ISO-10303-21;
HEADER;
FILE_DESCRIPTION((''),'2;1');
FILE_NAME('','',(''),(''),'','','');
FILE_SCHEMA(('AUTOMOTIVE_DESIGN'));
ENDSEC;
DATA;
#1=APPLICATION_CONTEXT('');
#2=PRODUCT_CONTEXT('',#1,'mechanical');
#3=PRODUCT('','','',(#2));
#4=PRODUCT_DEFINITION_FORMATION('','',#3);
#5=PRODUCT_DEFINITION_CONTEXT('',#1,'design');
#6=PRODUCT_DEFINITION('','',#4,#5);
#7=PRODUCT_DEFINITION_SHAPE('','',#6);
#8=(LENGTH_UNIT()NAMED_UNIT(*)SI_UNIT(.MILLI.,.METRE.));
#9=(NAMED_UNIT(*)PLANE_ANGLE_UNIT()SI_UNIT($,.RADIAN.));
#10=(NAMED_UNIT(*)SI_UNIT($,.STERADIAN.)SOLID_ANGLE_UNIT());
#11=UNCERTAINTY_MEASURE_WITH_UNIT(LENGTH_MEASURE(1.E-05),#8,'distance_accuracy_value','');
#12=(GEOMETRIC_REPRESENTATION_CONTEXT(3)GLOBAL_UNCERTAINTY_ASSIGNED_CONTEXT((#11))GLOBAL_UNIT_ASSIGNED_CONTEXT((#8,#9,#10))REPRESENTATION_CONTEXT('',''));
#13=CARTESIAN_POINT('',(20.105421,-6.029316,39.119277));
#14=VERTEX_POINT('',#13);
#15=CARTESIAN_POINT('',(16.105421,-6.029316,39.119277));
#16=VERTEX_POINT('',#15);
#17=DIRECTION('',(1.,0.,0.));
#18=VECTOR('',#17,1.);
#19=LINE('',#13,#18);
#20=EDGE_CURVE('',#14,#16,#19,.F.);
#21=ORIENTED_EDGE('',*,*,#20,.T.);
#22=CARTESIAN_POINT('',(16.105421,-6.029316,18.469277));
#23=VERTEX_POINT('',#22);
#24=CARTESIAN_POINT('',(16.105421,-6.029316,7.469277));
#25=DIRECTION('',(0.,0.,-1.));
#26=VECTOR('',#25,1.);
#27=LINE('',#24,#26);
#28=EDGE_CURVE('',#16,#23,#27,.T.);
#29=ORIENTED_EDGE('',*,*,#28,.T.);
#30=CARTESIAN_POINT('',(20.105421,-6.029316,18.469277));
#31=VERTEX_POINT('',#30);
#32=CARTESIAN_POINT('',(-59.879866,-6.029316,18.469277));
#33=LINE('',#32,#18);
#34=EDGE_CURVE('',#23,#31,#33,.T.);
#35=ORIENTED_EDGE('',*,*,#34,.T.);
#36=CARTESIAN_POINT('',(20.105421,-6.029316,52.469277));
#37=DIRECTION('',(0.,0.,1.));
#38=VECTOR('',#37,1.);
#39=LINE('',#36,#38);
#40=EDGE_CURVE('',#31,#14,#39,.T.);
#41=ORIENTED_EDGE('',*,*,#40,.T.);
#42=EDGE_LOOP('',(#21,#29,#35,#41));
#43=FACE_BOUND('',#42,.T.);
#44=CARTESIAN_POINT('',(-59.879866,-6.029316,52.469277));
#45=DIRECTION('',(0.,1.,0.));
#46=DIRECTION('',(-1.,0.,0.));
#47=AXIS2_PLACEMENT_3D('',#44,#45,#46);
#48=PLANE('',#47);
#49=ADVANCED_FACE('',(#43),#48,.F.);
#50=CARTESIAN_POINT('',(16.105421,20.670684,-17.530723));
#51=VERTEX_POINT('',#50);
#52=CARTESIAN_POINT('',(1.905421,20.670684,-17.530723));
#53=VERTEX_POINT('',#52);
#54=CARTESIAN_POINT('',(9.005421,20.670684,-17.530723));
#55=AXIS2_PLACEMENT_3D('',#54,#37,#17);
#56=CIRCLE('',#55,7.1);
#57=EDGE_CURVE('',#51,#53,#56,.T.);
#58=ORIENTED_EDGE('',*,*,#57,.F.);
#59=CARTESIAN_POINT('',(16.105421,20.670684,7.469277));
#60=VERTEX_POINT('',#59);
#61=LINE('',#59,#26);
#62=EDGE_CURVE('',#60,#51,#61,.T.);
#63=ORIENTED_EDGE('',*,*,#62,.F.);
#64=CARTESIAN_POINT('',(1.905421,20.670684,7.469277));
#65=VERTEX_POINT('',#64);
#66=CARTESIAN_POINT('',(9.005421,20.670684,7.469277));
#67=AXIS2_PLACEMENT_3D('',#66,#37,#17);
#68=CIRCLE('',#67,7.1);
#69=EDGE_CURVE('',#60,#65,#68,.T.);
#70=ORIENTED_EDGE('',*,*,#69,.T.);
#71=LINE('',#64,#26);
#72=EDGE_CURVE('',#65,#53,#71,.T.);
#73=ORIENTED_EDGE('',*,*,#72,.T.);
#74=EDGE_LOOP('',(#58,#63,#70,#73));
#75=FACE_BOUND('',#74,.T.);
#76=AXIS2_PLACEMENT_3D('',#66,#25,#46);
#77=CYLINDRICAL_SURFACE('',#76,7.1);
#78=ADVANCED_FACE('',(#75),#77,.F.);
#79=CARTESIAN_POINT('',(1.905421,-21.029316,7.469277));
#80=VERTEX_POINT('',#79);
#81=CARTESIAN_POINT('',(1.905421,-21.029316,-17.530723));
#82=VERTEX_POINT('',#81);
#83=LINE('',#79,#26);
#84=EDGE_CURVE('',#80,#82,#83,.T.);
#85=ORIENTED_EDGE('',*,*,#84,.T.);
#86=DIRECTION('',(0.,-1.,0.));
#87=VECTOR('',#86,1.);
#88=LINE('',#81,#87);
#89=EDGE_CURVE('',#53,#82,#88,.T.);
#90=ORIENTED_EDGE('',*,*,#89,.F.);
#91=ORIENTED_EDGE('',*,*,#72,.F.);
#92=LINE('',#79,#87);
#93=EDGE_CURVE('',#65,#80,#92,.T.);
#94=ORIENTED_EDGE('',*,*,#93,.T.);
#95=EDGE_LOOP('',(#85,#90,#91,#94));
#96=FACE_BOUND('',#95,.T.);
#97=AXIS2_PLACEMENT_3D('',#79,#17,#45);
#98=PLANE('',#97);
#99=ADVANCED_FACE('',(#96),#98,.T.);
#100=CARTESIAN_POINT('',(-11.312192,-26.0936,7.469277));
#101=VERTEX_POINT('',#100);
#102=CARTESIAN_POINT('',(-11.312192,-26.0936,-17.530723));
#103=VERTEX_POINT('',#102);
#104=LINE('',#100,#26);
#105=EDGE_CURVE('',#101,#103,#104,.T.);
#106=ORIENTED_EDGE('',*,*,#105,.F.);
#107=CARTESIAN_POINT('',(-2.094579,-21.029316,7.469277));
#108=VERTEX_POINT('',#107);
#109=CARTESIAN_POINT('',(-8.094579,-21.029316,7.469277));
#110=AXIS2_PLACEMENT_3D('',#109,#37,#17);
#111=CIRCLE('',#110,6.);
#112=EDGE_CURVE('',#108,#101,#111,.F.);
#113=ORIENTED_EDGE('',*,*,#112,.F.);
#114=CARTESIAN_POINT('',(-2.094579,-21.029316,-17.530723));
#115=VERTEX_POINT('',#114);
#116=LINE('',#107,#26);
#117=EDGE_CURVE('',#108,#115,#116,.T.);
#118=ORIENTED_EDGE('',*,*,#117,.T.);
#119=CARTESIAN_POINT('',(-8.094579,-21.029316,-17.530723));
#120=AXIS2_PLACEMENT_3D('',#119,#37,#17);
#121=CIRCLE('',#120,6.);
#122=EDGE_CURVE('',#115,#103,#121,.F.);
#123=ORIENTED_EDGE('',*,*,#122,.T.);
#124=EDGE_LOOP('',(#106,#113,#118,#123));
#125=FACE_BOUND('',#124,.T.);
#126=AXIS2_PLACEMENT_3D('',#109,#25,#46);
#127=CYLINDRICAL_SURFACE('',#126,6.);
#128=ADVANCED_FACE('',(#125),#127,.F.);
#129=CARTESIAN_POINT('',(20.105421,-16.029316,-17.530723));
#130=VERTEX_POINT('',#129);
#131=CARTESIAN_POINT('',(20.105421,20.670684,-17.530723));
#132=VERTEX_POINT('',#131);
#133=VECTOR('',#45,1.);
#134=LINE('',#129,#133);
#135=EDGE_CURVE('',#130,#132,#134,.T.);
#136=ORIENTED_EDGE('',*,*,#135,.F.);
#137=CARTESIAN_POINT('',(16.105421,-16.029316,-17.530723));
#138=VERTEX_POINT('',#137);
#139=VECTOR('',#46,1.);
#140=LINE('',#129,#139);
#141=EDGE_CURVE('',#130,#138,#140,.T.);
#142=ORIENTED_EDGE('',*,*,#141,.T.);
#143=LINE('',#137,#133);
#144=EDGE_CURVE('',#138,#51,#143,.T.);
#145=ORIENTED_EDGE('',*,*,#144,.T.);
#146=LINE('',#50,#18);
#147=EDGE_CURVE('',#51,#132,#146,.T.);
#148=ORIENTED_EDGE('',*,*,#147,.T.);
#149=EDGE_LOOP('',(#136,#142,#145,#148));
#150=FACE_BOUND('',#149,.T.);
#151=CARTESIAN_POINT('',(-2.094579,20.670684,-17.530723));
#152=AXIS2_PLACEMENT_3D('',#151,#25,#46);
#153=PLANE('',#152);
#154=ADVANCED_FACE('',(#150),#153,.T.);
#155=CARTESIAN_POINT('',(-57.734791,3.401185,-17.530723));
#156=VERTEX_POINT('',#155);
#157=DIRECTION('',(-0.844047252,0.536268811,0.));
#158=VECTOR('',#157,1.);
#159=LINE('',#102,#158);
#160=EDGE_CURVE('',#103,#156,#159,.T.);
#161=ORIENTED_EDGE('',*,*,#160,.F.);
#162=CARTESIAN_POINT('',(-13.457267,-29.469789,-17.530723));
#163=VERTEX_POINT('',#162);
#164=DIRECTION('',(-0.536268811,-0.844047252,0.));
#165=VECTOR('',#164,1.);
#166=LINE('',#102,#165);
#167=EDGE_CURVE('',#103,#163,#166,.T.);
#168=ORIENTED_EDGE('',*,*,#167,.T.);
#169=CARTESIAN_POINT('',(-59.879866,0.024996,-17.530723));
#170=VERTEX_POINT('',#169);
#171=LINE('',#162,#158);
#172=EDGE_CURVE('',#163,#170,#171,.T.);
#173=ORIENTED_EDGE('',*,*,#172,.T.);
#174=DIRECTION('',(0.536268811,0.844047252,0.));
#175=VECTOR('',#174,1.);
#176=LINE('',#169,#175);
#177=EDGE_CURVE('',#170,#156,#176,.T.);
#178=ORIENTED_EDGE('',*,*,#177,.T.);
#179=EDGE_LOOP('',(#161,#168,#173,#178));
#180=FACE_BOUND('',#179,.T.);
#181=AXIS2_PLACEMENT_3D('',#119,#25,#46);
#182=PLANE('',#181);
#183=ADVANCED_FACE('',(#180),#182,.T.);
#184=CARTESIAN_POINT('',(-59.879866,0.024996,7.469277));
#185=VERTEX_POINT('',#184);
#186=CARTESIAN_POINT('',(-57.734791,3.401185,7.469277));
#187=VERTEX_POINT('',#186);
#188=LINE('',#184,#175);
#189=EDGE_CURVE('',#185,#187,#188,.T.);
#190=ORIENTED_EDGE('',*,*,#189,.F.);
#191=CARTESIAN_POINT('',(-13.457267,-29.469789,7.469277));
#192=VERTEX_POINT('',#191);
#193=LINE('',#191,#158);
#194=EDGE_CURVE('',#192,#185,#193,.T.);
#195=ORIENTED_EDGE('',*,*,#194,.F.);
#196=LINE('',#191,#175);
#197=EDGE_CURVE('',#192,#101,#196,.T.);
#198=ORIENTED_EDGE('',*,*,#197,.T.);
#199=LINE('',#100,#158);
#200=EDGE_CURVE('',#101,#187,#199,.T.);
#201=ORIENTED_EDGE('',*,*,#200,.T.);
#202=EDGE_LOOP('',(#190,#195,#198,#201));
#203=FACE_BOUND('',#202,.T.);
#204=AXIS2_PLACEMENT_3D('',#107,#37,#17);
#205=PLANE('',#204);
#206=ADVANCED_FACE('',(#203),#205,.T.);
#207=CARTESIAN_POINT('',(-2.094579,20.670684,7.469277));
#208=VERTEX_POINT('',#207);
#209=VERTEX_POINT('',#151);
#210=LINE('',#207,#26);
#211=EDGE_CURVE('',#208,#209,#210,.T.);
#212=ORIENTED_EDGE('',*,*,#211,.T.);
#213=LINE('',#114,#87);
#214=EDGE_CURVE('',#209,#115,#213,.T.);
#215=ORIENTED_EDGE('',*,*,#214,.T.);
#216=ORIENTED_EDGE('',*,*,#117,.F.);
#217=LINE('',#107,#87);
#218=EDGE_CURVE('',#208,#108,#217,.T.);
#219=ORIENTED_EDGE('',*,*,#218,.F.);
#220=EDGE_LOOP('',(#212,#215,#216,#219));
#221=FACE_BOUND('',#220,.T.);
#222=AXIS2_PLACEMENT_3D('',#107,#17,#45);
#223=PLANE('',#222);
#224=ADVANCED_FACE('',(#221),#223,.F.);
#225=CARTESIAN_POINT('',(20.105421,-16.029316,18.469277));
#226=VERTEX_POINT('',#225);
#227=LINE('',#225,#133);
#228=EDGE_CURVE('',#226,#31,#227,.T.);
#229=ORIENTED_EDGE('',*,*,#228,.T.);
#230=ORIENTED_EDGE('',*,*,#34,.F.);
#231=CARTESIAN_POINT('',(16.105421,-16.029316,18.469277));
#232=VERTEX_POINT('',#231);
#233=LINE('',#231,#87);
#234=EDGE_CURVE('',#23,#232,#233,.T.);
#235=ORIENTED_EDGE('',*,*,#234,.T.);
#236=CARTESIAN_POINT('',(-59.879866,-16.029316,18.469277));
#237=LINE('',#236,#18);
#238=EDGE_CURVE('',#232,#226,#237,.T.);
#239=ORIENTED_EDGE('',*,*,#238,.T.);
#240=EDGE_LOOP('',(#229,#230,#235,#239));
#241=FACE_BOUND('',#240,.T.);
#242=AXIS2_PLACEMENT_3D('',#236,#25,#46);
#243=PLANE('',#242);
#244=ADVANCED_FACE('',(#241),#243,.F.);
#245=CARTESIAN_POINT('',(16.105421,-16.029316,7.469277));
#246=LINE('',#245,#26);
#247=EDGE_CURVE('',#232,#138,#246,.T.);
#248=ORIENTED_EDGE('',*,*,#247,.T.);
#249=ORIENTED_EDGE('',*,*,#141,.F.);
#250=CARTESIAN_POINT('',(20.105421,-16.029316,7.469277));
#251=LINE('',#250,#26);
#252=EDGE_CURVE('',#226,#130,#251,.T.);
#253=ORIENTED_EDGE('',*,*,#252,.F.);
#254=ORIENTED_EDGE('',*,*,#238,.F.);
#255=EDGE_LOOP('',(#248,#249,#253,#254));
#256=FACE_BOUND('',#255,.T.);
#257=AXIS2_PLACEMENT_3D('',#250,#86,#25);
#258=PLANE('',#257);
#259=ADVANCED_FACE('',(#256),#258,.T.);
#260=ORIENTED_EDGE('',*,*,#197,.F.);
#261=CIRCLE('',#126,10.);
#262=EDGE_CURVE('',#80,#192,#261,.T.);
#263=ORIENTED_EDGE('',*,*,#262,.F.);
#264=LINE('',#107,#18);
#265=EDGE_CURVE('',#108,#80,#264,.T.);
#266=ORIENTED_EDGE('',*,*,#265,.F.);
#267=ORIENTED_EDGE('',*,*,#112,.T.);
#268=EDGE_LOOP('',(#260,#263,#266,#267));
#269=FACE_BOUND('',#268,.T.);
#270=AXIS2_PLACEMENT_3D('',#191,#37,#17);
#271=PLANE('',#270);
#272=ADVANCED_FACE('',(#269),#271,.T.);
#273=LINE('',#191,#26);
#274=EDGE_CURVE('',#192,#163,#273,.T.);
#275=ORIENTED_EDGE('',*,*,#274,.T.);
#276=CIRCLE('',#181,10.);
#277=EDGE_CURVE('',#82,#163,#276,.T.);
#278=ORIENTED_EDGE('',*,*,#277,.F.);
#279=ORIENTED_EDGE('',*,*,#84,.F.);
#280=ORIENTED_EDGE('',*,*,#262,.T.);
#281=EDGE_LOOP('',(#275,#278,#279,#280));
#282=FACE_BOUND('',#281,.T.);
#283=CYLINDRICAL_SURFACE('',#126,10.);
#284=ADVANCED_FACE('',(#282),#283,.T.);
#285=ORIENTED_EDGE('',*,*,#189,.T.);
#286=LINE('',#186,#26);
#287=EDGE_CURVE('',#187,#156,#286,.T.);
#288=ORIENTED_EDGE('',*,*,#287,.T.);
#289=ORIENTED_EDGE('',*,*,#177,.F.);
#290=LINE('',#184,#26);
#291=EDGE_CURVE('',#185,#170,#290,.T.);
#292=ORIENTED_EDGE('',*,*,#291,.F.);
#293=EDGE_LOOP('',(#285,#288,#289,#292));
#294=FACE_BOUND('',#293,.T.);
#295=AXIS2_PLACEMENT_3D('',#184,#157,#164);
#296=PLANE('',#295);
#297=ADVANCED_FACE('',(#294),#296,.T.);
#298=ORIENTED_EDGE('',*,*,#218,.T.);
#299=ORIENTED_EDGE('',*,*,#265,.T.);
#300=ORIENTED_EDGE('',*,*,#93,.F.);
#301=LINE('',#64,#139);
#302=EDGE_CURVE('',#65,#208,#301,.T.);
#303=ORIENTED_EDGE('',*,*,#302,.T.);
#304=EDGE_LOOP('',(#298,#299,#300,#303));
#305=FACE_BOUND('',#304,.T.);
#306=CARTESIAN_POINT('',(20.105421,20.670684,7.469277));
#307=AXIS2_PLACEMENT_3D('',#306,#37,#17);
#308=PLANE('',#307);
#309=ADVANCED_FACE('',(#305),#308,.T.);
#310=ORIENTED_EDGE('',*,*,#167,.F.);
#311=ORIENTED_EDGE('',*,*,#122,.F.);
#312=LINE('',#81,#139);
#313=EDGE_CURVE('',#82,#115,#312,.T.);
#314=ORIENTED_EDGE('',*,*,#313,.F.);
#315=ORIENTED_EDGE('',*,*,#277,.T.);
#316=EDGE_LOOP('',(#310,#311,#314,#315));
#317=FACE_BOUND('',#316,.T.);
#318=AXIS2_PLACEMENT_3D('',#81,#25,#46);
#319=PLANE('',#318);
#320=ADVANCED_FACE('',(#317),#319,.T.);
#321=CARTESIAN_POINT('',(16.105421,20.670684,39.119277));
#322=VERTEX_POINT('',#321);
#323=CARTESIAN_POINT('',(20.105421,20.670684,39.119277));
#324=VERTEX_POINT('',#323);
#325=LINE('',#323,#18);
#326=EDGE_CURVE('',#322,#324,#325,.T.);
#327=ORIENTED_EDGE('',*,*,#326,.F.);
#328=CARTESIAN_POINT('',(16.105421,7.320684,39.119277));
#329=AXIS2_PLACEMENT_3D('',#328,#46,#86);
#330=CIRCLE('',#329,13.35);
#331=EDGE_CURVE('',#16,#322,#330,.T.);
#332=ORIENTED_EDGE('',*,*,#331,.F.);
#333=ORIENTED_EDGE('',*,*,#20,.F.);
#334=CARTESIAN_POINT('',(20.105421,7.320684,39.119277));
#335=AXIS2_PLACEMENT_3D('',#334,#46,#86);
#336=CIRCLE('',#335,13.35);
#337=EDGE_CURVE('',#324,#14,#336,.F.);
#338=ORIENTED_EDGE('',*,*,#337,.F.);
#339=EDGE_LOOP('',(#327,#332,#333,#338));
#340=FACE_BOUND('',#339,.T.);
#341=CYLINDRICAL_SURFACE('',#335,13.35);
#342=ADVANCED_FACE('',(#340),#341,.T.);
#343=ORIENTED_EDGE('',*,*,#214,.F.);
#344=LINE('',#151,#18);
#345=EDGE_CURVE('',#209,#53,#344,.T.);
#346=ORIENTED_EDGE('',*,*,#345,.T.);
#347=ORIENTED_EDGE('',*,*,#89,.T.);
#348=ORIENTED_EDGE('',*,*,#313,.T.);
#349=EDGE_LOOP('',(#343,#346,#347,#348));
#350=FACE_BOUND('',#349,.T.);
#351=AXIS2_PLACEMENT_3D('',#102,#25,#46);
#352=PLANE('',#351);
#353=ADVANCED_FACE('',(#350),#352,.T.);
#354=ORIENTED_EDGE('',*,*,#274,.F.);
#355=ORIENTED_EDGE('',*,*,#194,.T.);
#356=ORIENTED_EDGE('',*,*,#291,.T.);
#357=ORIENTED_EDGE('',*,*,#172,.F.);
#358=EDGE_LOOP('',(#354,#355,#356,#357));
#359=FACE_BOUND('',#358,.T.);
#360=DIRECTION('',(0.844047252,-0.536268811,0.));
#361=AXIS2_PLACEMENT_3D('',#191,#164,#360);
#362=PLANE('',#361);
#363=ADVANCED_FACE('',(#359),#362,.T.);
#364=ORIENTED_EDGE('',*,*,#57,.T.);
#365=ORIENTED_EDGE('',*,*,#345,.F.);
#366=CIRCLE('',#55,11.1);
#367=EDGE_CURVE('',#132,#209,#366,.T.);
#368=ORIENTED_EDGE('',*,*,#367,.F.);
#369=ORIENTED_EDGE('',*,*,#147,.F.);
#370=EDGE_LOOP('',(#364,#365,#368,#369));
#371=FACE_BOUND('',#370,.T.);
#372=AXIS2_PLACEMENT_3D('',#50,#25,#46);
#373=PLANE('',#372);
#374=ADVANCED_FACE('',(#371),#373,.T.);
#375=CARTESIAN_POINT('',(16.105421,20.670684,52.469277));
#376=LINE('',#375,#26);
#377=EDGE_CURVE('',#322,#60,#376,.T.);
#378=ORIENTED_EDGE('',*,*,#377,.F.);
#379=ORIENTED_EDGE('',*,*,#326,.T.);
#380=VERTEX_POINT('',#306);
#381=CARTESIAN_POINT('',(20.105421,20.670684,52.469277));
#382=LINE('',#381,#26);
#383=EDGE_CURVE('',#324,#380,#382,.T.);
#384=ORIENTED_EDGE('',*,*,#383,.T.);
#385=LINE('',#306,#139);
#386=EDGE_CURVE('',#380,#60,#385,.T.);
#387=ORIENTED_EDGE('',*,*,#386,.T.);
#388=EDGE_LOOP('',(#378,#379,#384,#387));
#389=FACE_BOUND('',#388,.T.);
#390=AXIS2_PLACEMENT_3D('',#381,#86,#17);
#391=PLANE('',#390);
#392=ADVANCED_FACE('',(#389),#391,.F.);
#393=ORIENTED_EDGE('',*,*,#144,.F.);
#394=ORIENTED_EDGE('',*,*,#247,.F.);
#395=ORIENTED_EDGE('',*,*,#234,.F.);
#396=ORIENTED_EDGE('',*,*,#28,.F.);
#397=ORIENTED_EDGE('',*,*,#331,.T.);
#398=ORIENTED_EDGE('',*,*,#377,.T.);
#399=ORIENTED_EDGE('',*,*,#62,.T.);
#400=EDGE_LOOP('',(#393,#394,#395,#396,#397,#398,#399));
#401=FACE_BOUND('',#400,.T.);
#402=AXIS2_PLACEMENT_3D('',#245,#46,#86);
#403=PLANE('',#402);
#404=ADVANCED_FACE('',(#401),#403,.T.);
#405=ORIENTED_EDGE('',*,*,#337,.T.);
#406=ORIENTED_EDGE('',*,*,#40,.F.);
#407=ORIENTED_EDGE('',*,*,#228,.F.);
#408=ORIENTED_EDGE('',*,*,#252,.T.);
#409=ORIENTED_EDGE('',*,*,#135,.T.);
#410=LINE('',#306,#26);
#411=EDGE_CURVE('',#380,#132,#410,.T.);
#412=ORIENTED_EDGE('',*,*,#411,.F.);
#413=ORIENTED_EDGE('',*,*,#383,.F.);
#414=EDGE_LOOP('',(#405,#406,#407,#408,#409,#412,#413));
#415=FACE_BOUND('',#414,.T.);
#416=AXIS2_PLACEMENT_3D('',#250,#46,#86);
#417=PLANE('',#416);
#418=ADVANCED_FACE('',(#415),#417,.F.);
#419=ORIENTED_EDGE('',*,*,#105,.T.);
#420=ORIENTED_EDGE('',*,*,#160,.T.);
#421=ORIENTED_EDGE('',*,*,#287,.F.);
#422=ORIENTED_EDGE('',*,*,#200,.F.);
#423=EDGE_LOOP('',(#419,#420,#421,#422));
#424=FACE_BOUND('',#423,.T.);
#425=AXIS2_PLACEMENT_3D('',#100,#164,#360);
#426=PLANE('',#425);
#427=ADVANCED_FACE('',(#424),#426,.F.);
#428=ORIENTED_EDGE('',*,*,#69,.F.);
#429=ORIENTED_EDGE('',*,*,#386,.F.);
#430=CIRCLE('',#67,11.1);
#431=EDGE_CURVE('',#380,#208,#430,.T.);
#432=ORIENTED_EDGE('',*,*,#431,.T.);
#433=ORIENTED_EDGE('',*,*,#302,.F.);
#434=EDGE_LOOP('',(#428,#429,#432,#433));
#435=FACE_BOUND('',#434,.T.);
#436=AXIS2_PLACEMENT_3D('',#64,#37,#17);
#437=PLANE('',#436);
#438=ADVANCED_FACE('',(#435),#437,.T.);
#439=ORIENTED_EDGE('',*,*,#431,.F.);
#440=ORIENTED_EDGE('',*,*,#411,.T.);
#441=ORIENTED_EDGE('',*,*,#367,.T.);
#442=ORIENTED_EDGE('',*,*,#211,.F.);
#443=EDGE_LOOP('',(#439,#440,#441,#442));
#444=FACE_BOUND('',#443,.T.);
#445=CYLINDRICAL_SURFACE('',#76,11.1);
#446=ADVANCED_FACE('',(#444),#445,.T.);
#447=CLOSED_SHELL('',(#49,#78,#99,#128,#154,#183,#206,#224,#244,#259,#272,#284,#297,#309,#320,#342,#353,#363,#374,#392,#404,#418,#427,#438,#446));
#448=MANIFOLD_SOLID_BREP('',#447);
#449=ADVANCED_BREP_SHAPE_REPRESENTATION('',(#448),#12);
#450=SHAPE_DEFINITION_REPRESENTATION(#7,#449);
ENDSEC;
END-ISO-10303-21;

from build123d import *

# Parameters (mm, degrees)
BASE_FLANGE1_DEPTH  = 2.5
SKETCH6_W           = 0.4
SKETCH6_H           = 3.67
BOSS_EXTRUDE1_DEPTH = 4.5
SKETCH7_W           = 3.4
SKETCH7_H           = 1
CUT_EXTRUDE1_DEPTH  = 12.139958989
FILLET1_RADIUS      = 1.335
FILLET1_LENGTH      = 0.4
SCALE1_SCALE        = 10


# Sheet-metal steps are written as plain solids
with BuildPart() as part:
    # Sketch1 → Base-Flange1 (new body)
    with BuildSketch(Plane.XY):
        with BuildLine():
            Line((0.71, -1.835), (0.71, 1.835))
            ThreePointArc((0.71, 1.835), (0, 2.545), (-0.71, 1.835))
            Line((-0.71, 1.835), (-0.71, -2.335))
            ThreePointArc((-0.71, -2.335), (-1.228475759, -3.211432773), (-2.246268811, -3.179047252))
            Line((-2.246268811, -3.179047252), (-6.888528694, -0.229568793))
            Line((-6.888528694, -0.229568793), (-6.67402117, 0.108050107))
            Line((-6.67402117, 0.108050107), (-2.031761286, -2.841428351))
            ThreePointArc((-2.031761286, -2.841428351), (-1.421085455, -2.860859664), (-1.11, -2.335))
            Line((-1.11, -2.335), (-1.11, 1.835))
            ThreePointArc((-1.11, 1.835), (0, 2.945), (1.11, 1.835))
            Line((1.11, 1.835), (1.11, -1.835))
            Line((1.11, -1.835), (0.71, -1.835))
        make_face()
    extrude(amount=BASE_FLANGE1_DEPTH)

    # Sketch6 → Boss-Extrude1 (add)
    with BuildSketch(Plane.XY.offset(2.5)):
        with Locations((0.91, 0)):
            Rectangle(SKETCH6_W, SKETCH6_H)
    extrude(amount=BOSS_EXTRUDE1_DEPTH)

    # Sketch7 → Cut-Extrude1 (cut, through all)
    with BuildSketch(Plane(origin=(1.11, 0, 0), x_dir=(0, 0, -1), z_dir=(1, 0, 0))):
        with Locations((-5.3, -1.335)):
            Rectangle(SKETCH7_W, SKETCH7_H)
    extrude(amount=-CUT_EXTRUDE1_DEPTH, mode=Mode.SUBTRACT)

    # Fillet1: full round fillet: the end face becomes a half cylinder, R = half its width
    fillet1_face = Plane((0.91, 0.5, 7), x_dir=(-1, 0, 0), z_dir=(0, 0, 1))  # on the end face: x along it, z out of the body
    fillet1_slab = fillet1_face.offset(-FILLET1_RADIUS / 2) * Box(FILLET1_LENGTH, 2 * FILLET1_RADIUS, FILLET1_RADIUS, mode=Mode.PRIVATE)  # the body's end, R deep
    fillet1_round = Plane((0.91, 0.5, 5.665), x_dir=(0, 0, 1), z_dir=(-1, 0, 0)) * Cylinder(FILLET1_RADIUS, FILLET1_LENGTH, mode=Mode.PRIVATE)  # its axis R under the face
    add(fillet1_slab - fillet1_round, mode=Mode.SUBTRACT)


with BuildPart() as part_1:
    # Scale1: scaled about (-1.000602335, -0.257853748, 1.947858074)
    add(part.part.scale(SCALE1_SCALE).moved(Location((9.005421015, 2.320683732, -17.530722666))))


solid = part_1.part
